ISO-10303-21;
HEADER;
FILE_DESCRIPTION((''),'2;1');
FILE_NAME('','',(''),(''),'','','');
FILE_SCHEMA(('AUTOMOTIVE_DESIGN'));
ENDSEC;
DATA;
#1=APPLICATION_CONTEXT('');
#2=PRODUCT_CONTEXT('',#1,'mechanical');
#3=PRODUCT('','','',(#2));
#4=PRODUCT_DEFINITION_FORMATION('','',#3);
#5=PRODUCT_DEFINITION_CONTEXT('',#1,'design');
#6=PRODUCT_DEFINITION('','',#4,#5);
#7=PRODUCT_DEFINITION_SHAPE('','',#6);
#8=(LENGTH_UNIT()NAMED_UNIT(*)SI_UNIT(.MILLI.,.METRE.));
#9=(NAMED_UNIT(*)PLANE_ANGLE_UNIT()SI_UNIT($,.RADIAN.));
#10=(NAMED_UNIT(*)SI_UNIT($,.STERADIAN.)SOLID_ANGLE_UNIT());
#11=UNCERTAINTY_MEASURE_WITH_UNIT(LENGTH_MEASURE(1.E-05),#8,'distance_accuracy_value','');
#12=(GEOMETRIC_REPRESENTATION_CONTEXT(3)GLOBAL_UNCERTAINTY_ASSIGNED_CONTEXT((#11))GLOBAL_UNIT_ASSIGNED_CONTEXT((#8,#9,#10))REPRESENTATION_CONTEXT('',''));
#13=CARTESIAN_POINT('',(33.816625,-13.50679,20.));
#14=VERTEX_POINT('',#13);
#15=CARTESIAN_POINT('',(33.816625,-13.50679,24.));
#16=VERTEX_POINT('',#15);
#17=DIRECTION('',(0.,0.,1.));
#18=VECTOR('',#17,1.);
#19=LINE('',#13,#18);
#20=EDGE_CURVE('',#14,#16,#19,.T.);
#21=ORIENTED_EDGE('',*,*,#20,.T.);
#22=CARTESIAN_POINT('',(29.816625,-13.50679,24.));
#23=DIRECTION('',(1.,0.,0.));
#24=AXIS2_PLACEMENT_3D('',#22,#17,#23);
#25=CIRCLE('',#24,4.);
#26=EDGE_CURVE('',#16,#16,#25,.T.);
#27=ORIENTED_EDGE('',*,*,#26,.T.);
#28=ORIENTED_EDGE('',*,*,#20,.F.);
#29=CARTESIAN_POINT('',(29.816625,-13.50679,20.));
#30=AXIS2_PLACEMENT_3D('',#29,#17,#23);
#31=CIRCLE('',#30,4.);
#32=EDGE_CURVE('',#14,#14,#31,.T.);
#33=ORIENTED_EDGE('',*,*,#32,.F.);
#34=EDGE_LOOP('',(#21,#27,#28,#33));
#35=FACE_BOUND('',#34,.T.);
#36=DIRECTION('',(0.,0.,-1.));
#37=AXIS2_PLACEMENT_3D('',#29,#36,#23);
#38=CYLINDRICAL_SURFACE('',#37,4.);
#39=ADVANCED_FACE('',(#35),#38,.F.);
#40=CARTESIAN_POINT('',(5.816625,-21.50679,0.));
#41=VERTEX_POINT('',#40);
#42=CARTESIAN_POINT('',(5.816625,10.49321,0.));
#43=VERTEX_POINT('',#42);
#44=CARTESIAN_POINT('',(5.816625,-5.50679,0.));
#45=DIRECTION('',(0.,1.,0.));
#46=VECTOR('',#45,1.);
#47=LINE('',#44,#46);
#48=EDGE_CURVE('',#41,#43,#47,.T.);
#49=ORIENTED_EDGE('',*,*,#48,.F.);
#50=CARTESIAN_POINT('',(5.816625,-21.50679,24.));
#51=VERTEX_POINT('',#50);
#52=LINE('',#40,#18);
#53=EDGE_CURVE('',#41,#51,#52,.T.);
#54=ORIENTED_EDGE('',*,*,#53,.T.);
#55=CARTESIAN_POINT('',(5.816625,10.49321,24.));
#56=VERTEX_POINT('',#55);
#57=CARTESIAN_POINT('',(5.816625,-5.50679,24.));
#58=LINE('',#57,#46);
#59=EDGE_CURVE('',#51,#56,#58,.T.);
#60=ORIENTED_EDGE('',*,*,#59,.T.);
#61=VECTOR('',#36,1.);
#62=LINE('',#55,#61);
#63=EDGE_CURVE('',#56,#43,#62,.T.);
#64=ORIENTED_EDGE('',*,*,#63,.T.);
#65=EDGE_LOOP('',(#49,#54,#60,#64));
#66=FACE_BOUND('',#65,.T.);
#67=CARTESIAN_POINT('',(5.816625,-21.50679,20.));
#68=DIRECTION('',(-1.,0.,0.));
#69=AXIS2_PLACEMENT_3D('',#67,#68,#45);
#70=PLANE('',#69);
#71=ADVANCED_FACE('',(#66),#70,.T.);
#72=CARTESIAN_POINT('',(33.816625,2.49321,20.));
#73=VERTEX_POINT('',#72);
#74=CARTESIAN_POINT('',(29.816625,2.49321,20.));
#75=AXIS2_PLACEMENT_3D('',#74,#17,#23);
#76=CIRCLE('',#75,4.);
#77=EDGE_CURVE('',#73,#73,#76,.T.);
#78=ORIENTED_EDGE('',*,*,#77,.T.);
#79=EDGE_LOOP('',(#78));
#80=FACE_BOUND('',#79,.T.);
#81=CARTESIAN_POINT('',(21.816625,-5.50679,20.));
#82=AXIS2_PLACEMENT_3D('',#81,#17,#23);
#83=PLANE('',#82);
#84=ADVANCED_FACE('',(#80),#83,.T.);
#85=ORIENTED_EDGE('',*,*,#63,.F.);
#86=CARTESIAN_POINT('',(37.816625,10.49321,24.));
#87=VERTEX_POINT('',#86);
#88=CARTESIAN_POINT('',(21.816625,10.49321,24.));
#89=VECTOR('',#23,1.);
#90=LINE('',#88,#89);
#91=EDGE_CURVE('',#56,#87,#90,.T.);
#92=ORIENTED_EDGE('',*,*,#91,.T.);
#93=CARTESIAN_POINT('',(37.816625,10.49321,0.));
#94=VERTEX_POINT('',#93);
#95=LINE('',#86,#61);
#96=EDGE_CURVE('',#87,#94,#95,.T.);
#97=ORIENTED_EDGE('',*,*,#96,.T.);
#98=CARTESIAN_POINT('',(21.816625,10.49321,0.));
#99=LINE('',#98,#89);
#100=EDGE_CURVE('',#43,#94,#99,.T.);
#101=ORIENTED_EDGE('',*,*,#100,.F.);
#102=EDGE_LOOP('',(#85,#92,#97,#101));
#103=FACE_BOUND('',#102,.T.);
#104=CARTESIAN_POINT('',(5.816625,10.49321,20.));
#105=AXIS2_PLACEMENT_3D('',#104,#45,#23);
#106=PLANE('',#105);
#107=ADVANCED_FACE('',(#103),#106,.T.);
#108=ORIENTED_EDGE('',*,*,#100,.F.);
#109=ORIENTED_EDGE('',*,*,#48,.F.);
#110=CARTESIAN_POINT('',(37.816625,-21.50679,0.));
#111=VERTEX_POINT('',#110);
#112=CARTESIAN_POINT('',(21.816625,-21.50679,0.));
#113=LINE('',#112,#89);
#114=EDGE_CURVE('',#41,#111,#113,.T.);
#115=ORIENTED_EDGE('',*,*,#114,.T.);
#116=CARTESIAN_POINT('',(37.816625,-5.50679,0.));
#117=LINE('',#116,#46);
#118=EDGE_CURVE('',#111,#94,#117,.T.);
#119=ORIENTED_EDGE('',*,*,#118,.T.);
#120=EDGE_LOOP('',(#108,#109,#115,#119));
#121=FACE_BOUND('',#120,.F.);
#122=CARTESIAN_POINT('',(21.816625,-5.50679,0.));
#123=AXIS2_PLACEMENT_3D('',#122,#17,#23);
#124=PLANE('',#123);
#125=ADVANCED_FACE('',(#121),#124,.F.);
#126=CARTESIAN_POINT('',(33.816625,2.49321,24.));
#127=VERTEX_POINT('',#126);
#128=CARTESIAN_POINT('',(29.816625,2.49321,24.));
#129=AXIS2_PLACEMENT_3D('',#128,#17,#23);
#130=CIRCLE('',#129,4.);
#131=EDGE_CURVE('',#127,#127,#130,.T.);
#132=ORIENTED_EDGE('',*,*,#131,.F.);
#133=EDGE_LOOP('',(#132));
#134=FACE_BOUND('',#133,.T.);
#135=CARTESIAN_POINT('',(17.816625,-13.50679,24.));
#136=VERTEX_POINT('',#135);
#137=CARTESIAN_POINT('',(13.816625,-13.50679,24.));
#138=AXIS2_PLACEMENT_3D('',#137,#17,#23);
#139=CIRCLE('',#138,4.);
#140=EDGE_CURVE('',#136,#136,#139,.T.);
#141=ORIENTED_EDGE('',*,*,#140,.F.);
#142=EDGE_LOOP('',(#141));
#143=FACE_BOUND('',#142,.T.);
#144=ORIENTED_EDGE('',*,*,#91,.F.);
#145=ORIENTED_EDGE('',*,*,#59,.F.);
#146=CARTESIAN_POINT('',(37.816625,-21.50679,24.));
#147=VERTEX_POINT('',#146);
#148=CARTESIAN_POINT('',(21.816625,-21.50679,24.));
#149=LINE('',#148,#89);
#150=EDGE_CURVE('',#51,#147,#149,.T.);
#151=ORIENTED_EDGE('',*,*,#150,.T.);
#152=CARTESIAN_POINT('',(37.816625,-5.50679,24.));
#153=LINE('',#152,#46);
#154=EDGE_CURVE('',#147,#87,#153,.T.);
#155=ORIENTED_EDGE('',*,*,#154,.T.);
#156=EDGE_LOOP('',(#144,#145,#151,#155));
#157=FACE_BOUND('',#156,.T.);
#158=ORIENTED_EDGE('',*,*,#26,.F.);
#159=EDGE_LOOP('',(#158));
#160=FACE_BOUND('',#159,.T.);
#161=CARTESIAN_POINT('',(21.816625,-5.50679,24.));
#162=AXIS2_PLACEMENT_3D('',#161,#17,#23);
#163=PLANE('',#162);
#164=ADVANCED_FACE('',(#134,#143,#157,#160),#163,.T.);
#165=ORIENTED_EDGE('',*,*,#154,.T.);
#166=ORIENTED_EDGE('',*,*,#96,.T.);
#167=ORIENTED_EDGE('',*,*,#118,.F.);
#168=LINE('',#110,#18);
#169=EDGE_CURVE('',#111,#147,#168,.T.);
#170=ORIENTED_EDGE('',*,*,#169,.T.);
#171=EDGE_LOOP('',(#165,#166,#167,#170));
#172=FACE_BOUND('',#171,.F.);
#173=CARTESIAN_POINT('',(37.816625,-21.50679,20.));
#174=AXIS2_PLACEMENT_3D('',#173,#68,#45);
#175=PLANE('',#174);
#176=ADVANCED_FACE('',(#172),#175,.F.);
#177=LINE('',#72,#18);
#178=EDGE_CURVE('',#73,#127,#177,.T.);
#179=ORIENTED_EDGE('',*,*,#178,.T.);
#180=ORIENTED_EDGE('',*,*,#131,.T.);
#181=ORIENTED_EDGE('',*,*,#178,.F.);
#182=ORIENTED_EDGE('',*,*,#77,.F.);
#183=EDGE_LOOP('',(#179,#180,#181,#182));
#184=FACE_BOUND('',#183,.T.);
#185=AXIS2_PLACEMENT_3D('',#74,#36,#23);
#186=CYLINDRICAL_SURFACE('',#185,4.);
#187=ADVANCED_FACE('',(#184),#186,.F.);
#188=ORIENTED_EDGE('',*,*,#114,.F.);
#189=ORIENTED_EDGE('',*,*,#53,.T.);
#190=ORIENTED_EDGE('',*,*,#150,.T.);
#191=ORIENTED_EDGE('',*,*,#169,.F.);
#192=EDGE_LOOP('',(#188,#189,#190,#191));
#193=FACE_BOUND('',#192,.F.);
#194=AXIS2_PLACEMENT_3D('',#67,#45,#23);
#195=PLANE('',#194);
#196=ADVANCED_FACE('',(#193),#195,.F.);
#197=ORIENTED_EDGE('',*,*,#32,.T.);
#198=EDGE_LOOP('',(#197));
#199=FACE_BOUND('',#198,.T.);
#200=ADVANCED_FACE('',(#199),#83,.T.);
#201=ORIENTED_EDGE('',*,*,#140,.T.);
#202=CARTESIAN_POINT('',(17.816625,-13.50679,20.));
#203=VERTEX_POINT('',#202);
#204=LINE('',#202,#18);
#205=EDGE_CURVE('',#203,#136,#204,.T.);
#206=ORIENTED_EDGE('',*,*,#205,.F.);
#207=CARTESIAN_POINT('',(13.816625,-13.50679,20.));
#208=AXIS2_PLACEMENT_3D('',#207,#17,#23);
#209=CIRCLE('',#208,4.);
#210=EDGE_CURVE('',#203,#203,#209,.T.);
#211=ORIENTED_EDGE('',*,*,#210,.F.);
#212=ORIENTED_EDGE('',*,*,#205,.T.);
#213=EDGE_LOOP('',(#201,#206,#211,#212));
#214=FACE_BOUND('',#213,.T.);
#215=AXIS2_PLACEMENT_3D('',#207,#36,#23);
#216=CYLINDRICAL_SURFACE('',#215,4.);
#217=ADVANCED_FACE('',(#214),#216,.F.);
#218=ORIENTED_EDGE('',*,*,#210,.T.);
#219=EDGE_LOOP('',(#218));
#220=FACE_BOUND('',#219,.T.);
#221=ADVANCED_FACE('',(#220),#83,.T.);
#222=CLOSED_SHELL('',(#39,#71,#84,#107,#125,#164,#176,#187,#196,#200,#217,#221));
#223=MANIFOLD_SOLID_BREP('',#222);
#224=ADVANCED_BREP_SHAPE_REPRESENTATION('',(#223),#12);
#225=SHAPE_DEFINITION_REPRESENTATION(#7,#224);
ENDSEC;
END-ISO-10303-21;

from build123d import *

# Parameters (mm, degrees)
F0_W     = 32
F0_H     = 32
F1_DEPTH = 20
F4_W     = 32
F4_H     = 32
F4_R     = 4
F5_DEPTH = 4


# Not quite as in the source:
# - the program builds the solid bodies; features that only make, move or delete a surface that nothing else refers to are left out


with BuildPart() as f1:
    # F0 (on Top) → F1 (new body)
    with BuildSketch(Plane.XY):
        with Locations((21.8166250885, -5.5067900717)):
            Rectangle(F0_W, F0_H)
    extrude(amount=F1_DEPTH)

    # F4 (on face) → F5 (join)
    with BuildSketch(Plane.XY.offset(20)):
        with Locations((21.8166250885, -5.5067900717)):
            Rectangle(F4_W, F4_H)
        with Locations((13.8166250885, -13.5067900717)):
            Circle(F4_R, mode=Mode.SUBTRACT)
        with Locations((29.8166250885, -13.5067900717)):
            Circle(F4_R, mode=Mode.SUBTRACT)
        with Locations((29.8166250885, 2.4932099283)):
            Circle(F4_R, mode=Mode.SUBTRACT)
    extrude(amount=F5_DEPTH)


solid = f1.part
